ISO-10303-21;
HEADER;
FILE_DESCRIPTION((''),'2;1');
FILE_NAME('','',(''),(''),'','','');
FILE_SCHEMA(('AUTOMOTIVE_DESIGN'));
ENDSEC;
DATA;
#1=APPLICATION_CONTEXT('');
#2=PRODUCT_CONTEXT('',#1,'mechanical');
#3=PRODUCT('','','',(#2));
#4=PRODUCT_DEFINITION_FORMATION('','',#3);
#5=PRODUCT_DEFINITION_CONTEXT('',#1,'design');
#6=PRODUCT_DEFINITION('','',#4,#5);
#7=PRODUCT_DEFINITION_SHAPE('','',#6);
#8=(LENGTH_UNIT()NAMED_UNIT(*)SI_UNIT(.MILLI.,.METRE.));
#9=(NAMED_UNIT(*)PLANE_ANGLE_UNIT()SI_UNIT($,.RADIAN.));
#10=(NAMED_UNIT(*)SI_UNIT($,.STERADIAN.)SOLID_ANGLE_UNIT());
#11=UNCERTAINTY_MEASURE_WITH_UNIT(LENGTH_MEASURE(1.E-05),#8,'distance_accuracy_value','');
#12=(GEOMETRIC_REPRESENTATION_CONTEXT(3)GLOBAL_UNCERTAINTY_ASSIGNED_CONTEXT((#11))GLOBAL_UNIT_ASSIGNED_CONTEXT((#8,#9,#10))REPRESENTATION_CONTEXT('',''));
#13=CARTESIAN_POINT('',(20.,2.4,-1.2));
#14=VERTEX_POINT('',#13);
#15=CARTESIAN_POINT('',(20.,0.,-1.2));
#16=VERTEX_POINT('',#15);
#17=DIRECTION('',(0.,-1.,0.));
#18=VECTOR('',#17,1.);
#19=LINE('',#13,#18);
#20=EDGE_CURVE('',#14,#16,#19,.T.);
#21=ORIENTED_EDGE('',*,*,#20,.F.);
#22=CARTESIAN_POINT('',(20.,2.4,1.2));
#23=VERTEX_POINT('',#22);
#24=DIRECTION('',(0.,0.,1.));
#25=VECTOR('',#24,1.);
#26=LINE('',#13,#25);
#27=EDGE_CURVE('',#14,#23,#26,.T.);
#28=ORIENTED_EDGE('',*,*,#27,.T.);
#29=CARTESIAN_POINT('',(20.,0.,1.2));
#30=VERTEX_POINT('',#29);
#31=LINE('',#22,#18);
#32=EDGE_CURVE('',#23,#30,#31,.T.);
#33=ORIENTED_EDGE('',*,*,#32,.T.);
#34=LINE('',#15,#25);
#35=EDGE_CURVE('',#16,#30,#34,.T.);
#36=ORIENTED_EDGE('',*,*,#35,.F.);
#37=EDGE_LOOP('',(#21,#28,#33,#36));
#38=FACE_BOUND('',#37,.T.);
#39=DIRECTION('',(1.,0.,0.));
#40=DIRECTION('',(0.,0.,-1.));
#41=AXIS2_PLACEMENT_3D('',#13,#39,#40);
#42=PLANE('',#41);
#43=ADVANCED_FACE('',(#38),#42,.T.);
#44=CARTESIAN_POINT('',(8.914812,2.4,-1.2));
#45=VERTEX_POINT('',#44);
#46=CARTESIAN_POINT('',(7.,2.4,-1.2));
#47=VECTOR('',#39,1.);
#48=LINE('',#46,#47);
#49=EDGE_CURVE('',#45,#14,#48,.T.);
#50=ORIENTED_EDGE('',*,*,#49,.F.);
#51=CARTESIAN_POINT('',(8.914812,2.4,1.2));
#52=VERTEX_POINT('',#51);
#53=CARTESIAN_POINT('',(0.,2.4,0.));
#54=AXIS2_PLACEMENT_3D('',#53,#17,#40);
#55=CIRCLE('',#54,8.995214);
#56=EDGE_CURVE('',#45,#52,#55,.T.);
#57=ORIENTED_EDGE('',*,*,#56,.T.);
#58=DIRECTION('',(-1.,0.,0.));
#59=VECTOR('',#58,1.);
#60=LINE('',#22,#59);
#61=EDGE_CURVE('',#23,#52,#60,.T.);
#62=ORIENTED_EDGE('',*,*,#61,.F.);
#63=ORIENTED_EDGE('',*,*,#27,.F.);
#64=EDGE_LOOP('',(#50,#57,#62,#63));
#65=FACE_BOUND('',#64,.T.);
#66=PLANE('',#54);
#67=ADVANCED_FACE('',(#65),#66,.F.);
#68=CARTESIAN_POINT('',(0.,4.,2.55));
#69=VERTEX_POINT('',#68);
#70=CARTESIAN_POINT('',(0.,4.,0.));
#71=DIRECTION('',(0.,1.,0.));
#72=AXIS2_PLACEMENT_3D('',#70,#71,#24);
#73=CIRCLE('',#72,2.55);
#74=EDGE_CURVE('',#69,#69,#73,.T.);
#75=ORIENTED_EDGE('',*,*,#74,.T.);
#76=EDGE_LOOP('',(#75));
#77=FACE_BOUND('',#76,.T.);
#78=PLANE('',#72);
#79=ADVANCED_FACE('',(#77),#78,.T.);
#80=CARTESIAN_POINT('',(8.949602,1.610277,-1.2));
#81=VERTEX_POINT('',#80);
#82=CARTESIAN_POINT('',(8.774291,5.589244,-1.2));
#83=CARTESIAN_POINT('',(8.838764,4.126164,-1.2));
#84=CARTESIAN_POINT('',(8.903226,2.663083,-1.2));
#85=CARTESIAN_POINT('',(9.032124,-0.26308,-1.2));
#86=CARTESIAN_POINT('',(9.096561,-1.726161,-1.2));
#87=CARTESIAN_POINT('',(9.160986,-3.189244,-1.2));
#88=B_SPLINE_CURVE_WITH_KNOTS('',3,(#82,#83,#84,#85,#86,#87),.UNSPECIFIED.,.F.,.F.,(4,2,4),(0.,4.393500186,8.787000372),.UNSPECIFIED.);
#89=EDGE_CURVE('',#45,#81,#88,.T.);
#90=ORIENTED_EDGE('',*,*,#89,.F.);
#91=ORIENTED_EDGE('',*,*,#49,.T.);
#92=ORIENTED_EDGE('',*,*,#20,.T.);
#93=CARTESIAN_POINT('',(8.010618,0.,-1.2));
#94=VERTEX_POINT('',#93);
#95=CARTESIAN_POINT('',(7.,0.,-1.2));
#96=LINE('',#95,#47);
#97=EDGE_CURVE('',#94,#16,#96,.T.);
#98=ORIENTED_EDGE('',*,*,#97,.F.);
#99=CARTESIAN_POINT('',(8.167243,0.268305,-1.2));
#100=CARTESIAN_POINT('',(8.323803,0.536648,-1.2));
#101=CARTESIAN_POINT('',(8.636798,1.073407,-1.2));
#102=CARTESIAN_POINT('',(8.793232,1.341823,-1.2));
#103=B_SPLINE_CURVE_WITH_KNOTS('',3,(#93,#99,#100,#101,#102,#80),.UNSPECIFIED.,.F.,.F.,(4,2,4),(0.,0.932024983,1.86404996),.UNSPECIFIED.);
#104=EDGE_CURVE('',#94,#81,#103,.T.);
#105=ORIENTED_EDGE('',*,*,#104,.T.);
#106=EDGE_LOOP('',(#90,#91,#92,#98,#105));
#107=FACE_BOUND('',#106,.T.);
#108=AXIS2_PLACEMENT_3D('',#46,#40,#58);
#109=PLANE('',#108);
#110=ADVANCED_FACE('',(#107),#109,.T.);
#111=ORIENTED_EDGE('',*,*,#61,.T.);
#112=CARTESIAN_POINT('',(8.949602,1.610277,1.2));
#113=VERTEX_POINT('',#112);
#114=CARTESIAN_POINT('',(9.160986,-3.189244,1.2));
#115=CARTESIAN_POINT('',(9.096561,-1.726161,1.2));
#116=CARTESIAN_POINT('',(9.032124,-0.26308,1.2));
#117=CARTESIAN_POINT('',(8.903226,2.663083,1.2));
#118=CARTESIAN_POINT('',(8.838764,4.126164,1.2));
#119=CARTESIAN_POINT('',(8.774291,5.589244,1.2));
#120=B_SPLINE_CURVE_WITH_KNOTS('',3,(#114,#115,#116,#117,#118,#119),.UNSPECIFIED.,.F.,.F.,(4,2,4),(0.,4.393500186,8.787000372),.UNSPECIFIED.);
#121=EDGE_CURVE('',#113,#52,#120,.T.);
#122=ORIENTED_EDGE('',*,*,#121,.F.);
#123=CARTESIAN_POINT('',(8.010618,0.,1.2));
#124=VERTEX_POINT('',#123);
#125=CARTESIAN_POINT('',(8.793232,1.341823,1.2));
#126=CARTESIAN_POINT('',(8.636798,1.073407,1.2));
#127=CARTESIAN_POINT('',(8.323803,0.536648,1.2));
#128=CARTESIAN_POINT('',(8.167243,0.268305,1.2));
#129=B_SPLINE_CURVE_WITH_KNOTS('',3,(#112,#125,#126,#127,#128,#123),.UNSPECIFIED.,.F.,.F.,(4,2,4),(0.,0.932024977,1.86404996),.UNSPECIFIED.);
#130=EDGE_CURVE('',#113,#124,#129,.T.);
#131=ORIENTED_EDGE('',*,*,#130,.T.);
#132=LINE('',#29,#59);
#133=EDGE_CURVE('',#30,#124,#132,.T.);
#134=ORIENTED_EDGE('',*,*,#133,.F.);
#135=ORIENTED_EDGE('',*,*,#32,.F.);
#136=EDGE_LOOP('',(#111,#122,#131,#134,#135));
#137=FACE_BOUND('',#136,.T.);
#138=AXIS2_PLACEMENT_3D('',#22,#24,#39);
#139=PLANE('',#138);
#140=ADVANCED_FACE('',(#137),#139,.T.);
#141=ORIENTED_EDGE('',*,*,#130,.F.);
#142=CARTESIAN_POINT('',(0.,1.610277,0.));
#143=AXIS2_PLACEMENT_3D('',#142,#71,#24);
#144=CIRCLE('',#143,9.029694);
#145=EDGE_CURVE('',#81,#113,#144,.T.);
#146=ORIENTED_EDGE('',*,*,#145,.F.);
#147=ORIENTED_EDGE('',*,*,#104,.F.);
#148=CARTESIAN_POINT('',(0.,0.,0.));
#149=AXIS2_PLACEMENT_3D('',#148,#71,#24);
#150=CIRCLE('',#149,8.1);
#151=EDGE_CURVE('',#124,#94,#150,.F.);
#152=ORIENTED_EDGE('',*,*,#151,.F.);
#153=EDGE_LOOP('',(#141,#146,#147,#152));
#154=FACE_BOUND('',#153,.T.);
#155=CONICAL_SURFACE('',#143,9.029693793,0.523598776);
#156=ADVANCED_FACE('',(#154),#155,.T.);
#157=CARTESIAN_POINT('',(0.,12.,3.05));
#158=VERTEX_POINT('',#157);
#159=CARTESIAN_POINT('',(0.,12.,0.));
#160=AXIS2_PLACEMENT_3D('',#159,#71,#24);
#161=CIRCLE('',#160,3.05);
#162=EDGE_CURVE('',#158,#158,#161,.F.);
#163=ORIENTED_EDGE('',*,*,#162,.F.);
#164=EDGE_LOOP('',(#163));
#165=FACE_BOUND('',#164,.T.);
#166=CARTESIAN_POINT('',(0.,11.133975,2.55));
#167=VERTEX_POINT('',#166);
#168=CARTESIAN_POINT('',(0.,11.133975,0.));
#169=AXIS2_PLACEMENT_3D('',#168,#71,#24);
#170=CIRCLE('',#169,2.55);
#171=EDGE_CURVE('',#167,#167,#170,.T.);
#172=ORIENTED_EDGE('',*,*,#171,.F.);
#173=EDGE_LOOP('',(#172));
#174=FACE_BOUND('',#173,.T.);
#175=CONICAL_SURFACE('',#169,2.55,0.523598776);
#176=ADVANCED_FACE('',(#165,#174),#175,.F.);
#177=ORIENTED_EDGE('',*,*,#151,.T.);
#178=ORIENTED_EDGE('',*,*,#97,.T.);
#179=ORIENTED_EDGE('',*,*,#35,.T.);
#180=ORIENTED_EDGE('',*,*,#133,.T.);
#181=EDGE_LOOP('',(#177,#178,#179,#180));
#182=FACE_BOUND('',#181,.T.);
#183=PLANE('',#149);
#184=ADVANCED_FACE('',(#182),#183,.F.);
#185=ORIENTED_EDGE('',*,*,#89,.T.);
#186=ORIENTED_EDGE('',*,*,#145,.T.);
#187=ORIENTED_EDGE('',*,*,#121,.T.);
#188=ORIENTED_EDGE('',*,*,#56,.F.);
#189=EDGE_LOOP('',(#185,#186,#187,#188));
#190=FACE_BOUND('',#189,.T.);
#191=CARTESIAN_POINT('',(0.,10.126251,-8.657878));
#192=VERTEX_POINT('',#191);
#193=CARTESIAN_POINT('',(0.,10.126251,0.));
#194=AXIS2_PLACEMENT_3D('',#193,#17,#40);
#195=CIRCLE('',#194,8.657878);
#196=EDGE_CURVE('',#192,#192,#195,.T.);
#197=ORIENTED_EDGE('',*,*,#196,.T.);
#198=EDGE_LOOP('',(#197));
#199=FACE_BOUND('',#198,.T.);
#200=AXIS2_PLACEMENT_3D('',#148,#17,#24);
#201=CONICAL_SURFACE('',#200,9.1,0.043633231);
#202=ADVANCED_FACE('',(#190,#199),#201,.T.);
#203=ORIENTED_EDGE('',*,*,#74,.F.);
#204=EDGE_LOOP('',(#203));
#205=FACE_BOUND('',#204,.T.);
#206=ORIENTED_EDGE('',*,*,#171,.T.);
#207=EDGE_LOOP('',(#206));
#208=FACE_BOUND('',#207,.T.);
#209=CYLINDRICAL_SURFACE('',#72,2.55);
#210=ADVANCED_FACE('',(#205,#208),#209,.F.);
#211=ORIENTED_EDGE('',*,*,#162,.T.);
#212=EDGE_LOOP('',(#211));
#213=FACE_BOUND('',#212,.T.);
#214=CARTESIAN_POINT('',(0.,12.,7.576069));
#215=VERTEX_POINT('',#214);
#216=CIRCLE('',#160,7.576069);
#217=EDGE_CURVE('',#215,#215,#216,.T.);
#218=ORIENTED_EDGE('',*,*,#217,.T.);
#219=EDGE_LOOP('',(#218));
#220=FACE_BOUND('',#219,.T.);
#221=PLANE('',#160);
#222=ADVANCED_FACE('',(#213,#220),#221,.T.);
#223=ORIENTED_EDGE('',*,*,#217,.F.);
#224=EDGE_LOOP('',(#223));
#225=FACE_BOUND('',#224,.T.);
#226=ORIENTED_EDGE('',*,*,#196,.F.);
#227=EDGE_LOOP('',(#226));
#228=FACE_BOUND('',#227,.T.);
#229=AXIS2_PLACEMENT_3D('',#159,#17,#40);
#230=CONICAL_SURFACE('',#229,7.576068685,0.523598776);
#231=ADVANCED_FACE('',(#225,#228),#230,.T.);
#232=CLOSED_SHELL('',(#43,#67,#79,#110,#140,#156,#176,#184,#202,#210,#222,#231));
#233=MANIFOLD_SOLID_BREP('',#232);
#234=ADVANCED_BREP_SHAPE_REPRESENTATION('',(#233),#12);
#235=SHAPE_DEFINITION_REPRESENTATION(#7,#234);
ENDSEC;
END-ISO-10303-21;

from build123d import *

# Parameters (mm, degrees)
SKETCH_1_R          = 9.1
EXTRUDE_1_DEPTH     = 12
EXTRUDE_1_TAPER     = 2.5
SKETCH_2_R          = 2.55
CUT_EXTRUDE_1_DEPTH = 8
SKETCH_3_W          = 13
SKETCH_3_H          = 2.4
EXTRUDE_2_DEPTH     = 2.4
CHAMFER_1_SIZE      = 0.5
CHAMFER_1_SIZE2     = 0.866025404
CHAMFER_2_SIZE      = 1
CHAMFER_2_SIZE2     = 1.611810972
CHAMFER_3_SIZE      = 1.87553439
CHAMFER_3_SIZE_2    = 1


with BuildPart() as part:
    # 草图1 → 凸台-拉伸1 (new body)
    with BuildSketch(Plane(origin=(0, 0, 0), x_dir=(1, 0, 0), z_dir=(0, 1, 0))):
        Circle(SKETCH_1_R)
    extrude(amount=EXTRUDE_1_DEPTH, taper=EXTRUDE_1_TAPER)

    # 草图2 → 切除-拉伸1 (cut)
    with BuildSketch(Plane(origin=(0, 12, 0), x_dir=(1, 0, 0), z_dir=(0, 1, 0))):
        with Locations(Location((0, 0, 0), (0, 0, 270))):
            Circle(SKETCH_2_R)
    extrude(amount=-CUT_EXTRUDE_1_DEPTH, mode=Mode.SUBTRACT)

    # 草图3 → 凸台-拉伸2 (add)
    with BuildSketch(Plane.XZ):
        with Locations((13.5, 0)):
            Rectangle(SKETCH_3_W, SKETCH_3_H)
    extrude(amount=-EXTRUDE_2_DEPTH)

    # 倒角1
    chamfer_1_edges = [part.edges().sort_by_distance(p)[0] for p in [
        (0, 12, -2.55),
    ]]
    chamfer_1_side = [part.faces().sort_by_distance(p)[0] for p in [
        (-8.333500832, 12, 0),
    ]]
    chamfer(chamfer_1_edges, length=CHAMFER_1_SIZE, length2=CHAMFER_1_SIZE2, reference=chamfer_1_side[0])

    # 倒角2
    chamfer_2_edges = [part.edges().sort_by_distance(p)[0] for p in [
        (-9.1, 0, 0),
    ]]
    chamfer_2_side = [part.faces().sort_by_distance(p)[0] for p in [
        (1.331118316, 0, 0),
    ]]
    chamfer(chamfer_2_edges, length=CHAMFER_2_SIZE, length2=CHAMFER_2_SIZE2, reference=chamfer_2_side[0])

    # 倒角3
    # the kernel refuses this chamfer: 1.87553439, 1 mm, written as the material it takes off along each edge
    with BuildSketch(Plane(origin=(0, 12, 0), x_dir=(1, 0, 0), z_dir=(0, 0, -1))) as chamfer_3_piece_1:
        Polygon((8.576068685 + CHAMFER_3_SIZE * 0.0436193873717, CHAMFER_3_SIZE * 0.999048221729), (8.576068685 - CHAMFER_3_SIZE_2, 0), (8.576068685, 0), align=None)
    revolve(axis=Axis((0, 12, 0), (0, -1, 0)), mode=Mode.SUBTRACT)


solid = part.part
